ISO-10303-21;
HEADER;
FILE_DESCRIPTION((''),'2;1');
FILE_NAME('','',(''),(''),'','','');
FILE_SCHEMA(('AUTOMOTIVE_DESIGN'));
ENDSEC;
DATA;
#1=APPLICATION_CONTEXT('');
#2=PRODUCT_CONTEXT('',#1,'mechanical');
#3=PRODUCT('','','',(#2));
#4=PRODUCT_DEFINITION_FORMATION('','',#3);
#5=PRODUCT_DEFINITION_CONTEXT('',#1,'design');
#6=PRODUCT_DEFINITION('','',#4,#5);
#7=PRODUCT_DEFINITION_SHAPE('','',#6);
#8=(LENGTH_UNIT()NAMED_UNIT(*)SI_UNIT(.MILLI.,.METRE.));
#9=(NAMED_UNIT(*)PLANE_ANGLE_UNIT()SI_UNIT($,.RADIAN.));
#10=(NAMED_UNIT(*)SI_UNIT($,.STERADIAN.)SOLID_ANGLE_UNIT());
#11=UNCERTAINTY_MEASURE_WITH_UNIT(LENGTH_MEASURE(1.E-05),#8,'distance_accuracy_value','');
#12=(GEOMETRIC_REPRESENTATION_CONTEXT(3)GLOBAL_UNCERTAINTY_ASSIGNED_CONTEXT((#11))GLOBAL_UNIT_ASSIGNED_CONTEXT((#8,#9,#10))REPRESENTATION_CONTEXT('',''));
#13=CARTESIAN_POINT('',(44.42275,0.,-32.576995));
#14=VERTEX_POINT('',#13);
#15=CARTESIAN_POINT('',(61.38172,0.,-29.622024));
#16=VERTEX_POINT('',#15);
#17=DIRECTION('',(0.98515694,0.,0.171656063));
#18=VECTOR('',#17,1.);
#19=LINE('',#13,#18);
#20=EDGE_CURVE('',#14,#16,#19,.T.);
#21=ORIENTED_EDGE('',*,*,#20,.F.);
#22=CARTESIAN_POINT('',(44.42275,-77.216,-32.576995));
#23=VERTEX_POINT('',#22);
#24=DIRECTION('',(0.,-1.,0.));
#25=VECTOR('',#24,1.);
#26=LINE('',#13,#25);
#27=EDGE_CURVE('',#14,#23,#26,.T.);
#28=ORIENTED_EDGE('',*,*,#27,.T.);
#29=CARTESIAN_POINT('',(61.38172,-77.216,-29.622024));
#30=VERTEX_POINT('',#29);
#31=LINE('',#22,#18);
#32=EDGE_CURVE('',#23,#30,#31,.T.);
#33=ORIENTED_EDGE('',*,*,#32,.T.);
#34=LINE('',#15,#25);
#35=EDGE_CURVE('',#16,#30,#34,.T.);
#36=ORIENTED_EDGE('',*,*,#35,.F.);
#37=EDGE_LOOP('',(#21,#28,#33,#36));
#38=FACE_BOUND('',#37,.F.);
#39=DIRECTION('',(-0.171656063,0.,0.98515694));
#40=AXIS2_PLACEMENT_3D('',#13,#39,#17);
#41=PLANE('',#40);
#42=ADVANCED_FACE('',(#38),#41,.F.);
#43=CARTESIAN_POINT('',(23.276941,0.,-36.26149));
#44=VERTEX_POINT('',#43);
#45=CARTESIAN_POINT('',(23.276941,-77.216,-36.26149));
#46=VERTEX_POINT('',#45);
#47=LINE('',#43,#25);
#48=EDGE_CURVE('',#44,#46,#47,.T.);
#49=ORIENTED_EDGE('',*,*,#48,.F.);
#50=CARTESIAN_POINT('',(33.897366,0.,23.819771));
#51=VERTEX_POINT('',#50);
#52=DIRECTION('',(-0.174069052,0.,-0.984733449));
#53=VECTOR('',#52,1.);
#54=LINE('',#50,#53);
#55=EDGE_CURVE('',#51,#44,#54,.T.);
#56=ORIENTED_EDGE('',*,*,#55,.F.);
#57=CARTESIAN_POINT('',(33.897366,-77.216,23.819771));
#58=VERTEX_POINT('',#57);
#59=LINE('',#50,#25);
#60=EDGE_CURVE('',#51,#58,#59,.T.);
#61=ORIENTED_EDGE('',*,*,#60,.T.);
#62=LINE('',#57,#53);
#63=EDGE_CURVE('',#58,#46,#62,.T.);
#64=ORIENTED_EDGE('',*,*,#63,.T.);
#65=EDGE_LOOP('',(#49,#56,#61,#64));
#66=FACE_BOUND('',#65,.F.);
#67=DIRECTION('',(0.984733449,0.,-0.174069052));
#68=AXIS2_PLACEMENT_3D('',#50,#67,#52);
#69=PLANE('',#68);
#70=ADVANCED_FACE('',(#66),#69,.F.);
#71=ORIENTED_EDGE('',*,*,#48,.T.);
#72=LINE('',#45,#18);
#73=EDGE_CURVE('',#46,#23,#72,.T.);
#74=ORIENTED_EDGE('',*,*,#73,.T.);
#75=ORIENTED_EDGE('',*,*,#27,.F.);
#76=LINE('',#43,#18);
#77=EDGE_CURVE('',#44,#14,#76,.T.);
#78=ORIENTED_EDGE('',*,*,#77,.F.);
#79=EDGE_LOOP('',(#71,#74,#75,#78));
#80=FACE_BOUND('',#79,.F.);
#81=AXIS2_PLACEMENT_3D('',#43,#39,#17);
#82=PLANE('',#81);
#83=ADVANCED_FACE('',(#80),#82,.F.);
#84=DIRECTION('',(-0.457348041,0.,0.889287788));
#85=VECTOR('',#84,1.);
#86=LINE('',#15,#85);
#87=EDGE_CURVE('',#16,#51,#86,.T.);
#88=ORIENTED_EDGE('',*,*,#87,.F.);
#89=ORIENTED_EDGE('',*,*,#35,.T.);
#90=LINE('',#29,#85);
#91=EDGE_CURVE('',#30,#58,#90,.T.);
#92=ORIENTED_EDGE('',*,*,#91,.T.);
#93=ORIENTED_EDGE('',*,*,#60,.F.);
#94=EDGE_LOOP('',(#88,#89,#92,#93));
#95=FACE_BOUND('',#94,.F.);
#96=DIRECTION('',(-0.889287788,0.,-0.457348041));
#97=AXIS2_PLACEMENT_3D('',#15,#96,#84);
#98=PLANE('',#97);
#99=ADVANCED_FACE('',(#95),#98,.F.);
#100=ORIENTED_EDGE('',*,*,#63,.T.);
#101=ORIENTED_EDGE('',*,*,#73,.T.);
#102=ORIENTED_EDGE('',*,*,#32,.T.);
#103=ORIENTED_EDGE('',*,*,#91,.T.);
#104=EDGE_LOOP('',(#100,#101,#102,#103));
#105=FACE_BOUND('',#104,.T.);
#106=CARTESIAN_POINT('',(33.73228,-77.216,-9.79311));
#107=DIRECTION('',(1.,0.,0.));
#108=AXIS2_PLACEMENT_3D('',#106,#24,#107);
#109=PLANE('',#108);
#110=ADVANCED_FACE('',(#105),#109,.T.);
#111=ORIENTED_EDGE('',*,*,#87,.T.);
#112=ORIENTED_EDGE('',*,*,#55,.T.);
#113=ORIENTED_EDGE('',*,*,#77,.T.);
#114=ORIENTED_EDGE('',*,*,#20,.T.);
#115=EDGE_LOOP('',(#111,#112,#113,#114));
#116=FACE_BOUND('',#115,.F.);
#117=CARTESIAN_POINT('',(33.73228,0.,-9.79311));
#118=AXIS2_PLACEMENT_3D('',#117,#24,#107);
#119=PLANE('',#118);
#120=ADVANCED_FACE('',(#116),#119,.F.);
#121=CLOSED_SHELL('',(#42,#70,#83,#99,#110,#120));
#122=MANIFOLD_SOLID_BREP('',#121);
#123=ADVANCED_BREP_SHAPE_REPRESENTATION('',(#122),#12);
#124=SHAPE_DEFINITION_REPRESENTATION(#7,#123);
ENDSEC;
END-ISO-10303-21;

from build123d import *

# Parameters (mm, degrees)
F1_DEPTH = 77.216


# Not quite as in the source:
# - the program builds the solid bodies; features that only make, move or delete a surface that nothing else refers to are left out


with BuildPart() as f1:
    # F0 (on Front) → F1 (new body)
    with BuildSketch(Plane.XZ):
        Polygon((44.4227504639, -32.5769946799), (33.8973663747, 23.819770664), (23.2769409747, -36.2614902778), align=None)
        Polygon((61.3817200065, -29.6220239252), (33.8973663747, 23.819770664), (44.4227504639, -32.5769946799), align=None)
    extrude(amount=F1_DEPTH)


solid = f1.part
